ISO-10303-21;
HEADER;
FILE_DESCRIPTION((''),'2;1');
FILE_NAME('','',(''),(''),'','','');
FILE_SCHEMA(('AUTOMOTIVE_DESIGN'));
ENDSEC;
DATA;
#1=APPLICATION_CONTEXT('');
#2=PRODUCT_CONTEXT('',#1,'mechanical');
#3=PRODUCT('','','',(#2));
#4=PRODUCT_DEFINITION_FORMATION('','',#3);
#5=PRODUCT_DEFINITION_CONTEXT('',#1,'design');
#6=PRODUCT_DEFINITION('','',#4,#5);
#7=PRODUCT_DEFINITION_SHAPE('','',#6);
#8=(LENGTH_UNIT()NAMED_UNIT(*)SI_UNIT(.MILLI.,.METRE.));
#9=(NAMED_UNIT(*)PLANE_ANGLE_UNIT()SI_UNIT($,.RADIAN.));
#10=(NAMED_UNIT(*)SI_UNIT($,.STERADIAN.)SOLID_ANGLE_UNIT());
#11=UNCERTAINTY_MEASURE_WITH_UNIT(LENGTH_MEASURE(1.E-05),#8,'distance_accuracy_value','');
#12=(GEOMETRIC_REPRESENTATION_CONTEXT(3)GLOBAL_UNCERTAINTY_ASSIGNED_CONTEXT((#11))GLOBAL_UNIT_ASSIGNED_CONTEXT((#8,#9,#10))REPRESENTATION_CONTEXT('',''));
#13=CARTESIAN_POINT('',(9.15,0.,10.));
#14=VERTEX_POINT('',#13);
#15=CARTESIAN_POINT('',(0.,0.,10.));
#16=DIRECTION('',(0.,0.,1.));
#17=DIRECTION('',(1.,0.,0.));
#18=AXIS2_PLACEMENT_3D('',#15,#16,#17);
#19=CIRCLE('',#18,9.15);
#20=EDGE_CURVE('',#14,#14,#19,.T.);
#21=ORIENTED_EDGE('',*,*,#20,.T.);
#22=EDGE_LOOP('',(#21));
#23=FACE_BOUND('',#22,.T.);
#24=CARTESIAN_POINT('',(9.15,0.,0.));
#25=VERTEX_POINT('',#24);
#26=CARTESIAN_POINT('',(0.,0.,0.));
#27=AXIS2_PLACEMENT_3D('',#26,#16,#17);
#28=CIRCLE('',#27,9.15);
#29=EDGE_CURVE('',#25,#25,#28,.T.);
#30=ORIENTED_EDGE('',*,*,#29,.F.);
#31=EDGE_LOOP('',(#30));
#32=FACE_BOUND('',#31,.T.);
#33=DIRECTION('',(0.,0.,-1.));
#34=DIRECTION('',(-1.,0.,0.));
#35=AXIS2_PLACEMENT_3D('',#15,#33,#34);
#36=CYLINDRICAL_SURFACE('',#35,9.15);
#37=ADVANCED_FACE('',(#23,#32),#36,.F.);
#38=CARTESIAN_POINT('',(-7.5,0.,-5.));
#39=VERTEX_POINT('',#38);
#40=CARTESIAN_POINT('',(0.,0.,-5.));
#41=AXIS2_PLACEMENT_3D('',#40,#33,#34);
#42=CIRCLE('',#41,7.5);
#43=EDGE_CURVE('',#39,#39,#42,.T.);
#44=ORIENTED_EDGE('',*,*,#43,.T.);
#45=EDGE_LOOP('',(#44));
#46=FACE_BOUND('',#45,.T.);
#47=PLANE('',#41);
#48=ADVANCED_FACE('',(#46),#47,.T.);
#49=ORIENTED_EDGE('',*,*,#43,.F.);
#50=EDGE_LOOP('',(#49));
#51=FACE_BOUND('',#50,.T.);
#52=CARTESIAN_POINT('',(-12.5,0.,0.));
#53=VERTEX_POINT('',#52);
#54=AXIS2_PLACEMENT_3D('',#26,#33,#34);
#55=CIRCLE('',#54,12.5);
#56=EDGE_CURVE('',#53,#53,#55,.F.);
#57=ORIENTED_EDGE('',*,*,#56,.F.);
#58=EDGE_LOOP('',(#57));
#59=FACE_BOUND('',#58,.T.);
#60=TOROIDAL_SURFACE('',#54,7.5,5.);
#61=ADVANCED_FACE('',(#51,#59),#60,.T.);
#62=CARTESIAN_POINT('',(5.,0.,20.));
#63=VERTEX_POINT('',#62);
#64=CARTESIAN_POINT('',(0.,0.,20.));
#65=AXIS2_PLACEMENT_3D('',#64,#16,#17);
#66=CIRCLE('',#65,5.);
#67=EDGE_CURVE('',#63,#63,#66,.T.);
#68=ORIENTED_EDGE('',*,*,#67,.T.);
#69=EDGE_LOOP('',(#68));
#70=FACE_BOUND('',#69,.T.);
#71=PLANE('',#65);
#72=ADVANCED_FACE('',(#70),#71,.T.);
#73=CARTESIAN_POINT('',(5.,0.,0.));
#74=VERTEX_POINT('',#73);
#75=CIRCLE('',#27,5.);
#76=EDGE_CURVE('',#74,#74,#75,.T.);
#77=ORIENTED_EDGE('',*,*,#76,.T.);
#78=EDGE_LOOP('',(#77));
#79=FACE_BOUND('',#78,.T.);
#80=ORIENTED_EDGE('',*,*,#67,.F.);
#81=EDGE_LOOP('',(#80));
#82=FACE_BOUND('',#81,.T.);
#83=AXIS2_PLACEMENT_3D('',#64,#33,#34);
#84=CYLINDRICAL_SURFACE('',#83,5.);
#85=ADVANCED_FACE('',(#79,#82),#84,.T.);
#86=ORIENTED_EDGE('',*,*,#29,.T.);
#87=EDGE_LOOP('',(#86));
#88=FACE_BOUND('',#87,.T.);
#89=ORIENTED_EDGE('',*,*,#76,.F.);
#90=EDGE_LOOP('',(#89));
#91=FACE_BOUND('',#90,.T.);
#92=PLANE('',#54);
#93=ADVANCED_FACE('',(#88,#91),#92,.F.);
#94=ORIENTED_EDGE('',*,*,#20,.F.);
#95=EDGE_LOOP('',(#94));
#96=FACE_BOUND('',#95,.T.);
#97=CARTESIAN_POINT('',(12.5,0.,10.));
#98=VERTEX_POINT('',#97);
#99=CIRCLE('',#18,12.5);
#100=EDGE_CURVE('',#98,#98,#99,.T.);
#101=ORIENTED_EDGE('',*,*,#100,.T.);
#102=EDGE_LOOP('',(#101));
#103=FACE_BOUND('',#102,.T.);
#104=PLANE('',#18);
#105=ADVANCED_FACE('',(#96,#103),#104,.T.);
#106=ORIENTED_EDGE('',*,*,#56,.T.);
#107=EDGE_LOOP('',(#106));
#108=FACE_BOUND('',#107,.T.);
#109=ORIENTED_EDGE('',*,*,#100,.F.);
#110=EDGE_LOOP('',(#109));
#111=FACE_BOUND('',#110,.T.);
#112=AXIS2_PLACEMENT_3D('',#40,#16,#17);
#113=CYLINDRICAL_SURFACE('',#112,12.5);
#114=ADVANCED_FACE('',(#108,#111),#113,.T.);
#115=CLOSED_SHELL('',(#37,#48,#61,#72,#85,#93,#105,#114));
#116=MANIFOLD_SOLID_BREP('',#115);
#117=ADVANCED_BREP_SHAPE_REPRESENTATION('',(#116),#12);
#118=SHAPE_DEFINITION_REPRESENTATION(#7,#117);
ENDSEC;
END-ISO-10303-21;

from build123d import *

# Parameters (mm, degrees)
SKETCH_1_R      = 5
EXTRUDE_1_DEPTH = 20
SKETCH_2_R      = 12.5
EXTRUDE_2_DEPTH = 5
EXTRUDE_START   = 10
SKETCH_3_R      = 12.5
SKETCH_3_R_2    = 9.15
EXTRUDE_3_DEPTH = 10
FILLET_1_R      = 5


with BuildPart() as part:
    # 草图1 → 凸台-拉伸1 (new body)
    with BuildSketch(Plane.XY):
        Circle(SKETCH_1_R)
    extrude(amount=EXTRUDE_1_DEPTH)

    # 草图2 → 凸台-拉伸2 (add)
    with BuildSketch(Plane(origin=(0, 0, 0), x_dir=(-1, 0, 0), z_dir=(0, 0, -1))):
        Circle(SKETCH_2_R)
    extrude(amount=EXTRUDE_2_DEPTH)

    # 草图3 → 凸台-拉伸3 (add)
    with BuildSketch(Plane.XY.offset(EXTRUDE_START)):
        Circle(SKETCH_3_R)
        Circle(SKETCH_3_R_2, mode=Mode.SUBTRACT)
    extrude(amount=-EXTRUDE_3_DEPTH)

    # 圆角1
    fillet_1_edges = [part.edges().sort_by_distance(p)[0] for p in [
        (12.5, 0, -5),
    ]]
    fillet(fillet_1_edges, radius=FILLET_1_R - 0.0001)  # a hair under: the kernel refuses the full size


solid = part.part
